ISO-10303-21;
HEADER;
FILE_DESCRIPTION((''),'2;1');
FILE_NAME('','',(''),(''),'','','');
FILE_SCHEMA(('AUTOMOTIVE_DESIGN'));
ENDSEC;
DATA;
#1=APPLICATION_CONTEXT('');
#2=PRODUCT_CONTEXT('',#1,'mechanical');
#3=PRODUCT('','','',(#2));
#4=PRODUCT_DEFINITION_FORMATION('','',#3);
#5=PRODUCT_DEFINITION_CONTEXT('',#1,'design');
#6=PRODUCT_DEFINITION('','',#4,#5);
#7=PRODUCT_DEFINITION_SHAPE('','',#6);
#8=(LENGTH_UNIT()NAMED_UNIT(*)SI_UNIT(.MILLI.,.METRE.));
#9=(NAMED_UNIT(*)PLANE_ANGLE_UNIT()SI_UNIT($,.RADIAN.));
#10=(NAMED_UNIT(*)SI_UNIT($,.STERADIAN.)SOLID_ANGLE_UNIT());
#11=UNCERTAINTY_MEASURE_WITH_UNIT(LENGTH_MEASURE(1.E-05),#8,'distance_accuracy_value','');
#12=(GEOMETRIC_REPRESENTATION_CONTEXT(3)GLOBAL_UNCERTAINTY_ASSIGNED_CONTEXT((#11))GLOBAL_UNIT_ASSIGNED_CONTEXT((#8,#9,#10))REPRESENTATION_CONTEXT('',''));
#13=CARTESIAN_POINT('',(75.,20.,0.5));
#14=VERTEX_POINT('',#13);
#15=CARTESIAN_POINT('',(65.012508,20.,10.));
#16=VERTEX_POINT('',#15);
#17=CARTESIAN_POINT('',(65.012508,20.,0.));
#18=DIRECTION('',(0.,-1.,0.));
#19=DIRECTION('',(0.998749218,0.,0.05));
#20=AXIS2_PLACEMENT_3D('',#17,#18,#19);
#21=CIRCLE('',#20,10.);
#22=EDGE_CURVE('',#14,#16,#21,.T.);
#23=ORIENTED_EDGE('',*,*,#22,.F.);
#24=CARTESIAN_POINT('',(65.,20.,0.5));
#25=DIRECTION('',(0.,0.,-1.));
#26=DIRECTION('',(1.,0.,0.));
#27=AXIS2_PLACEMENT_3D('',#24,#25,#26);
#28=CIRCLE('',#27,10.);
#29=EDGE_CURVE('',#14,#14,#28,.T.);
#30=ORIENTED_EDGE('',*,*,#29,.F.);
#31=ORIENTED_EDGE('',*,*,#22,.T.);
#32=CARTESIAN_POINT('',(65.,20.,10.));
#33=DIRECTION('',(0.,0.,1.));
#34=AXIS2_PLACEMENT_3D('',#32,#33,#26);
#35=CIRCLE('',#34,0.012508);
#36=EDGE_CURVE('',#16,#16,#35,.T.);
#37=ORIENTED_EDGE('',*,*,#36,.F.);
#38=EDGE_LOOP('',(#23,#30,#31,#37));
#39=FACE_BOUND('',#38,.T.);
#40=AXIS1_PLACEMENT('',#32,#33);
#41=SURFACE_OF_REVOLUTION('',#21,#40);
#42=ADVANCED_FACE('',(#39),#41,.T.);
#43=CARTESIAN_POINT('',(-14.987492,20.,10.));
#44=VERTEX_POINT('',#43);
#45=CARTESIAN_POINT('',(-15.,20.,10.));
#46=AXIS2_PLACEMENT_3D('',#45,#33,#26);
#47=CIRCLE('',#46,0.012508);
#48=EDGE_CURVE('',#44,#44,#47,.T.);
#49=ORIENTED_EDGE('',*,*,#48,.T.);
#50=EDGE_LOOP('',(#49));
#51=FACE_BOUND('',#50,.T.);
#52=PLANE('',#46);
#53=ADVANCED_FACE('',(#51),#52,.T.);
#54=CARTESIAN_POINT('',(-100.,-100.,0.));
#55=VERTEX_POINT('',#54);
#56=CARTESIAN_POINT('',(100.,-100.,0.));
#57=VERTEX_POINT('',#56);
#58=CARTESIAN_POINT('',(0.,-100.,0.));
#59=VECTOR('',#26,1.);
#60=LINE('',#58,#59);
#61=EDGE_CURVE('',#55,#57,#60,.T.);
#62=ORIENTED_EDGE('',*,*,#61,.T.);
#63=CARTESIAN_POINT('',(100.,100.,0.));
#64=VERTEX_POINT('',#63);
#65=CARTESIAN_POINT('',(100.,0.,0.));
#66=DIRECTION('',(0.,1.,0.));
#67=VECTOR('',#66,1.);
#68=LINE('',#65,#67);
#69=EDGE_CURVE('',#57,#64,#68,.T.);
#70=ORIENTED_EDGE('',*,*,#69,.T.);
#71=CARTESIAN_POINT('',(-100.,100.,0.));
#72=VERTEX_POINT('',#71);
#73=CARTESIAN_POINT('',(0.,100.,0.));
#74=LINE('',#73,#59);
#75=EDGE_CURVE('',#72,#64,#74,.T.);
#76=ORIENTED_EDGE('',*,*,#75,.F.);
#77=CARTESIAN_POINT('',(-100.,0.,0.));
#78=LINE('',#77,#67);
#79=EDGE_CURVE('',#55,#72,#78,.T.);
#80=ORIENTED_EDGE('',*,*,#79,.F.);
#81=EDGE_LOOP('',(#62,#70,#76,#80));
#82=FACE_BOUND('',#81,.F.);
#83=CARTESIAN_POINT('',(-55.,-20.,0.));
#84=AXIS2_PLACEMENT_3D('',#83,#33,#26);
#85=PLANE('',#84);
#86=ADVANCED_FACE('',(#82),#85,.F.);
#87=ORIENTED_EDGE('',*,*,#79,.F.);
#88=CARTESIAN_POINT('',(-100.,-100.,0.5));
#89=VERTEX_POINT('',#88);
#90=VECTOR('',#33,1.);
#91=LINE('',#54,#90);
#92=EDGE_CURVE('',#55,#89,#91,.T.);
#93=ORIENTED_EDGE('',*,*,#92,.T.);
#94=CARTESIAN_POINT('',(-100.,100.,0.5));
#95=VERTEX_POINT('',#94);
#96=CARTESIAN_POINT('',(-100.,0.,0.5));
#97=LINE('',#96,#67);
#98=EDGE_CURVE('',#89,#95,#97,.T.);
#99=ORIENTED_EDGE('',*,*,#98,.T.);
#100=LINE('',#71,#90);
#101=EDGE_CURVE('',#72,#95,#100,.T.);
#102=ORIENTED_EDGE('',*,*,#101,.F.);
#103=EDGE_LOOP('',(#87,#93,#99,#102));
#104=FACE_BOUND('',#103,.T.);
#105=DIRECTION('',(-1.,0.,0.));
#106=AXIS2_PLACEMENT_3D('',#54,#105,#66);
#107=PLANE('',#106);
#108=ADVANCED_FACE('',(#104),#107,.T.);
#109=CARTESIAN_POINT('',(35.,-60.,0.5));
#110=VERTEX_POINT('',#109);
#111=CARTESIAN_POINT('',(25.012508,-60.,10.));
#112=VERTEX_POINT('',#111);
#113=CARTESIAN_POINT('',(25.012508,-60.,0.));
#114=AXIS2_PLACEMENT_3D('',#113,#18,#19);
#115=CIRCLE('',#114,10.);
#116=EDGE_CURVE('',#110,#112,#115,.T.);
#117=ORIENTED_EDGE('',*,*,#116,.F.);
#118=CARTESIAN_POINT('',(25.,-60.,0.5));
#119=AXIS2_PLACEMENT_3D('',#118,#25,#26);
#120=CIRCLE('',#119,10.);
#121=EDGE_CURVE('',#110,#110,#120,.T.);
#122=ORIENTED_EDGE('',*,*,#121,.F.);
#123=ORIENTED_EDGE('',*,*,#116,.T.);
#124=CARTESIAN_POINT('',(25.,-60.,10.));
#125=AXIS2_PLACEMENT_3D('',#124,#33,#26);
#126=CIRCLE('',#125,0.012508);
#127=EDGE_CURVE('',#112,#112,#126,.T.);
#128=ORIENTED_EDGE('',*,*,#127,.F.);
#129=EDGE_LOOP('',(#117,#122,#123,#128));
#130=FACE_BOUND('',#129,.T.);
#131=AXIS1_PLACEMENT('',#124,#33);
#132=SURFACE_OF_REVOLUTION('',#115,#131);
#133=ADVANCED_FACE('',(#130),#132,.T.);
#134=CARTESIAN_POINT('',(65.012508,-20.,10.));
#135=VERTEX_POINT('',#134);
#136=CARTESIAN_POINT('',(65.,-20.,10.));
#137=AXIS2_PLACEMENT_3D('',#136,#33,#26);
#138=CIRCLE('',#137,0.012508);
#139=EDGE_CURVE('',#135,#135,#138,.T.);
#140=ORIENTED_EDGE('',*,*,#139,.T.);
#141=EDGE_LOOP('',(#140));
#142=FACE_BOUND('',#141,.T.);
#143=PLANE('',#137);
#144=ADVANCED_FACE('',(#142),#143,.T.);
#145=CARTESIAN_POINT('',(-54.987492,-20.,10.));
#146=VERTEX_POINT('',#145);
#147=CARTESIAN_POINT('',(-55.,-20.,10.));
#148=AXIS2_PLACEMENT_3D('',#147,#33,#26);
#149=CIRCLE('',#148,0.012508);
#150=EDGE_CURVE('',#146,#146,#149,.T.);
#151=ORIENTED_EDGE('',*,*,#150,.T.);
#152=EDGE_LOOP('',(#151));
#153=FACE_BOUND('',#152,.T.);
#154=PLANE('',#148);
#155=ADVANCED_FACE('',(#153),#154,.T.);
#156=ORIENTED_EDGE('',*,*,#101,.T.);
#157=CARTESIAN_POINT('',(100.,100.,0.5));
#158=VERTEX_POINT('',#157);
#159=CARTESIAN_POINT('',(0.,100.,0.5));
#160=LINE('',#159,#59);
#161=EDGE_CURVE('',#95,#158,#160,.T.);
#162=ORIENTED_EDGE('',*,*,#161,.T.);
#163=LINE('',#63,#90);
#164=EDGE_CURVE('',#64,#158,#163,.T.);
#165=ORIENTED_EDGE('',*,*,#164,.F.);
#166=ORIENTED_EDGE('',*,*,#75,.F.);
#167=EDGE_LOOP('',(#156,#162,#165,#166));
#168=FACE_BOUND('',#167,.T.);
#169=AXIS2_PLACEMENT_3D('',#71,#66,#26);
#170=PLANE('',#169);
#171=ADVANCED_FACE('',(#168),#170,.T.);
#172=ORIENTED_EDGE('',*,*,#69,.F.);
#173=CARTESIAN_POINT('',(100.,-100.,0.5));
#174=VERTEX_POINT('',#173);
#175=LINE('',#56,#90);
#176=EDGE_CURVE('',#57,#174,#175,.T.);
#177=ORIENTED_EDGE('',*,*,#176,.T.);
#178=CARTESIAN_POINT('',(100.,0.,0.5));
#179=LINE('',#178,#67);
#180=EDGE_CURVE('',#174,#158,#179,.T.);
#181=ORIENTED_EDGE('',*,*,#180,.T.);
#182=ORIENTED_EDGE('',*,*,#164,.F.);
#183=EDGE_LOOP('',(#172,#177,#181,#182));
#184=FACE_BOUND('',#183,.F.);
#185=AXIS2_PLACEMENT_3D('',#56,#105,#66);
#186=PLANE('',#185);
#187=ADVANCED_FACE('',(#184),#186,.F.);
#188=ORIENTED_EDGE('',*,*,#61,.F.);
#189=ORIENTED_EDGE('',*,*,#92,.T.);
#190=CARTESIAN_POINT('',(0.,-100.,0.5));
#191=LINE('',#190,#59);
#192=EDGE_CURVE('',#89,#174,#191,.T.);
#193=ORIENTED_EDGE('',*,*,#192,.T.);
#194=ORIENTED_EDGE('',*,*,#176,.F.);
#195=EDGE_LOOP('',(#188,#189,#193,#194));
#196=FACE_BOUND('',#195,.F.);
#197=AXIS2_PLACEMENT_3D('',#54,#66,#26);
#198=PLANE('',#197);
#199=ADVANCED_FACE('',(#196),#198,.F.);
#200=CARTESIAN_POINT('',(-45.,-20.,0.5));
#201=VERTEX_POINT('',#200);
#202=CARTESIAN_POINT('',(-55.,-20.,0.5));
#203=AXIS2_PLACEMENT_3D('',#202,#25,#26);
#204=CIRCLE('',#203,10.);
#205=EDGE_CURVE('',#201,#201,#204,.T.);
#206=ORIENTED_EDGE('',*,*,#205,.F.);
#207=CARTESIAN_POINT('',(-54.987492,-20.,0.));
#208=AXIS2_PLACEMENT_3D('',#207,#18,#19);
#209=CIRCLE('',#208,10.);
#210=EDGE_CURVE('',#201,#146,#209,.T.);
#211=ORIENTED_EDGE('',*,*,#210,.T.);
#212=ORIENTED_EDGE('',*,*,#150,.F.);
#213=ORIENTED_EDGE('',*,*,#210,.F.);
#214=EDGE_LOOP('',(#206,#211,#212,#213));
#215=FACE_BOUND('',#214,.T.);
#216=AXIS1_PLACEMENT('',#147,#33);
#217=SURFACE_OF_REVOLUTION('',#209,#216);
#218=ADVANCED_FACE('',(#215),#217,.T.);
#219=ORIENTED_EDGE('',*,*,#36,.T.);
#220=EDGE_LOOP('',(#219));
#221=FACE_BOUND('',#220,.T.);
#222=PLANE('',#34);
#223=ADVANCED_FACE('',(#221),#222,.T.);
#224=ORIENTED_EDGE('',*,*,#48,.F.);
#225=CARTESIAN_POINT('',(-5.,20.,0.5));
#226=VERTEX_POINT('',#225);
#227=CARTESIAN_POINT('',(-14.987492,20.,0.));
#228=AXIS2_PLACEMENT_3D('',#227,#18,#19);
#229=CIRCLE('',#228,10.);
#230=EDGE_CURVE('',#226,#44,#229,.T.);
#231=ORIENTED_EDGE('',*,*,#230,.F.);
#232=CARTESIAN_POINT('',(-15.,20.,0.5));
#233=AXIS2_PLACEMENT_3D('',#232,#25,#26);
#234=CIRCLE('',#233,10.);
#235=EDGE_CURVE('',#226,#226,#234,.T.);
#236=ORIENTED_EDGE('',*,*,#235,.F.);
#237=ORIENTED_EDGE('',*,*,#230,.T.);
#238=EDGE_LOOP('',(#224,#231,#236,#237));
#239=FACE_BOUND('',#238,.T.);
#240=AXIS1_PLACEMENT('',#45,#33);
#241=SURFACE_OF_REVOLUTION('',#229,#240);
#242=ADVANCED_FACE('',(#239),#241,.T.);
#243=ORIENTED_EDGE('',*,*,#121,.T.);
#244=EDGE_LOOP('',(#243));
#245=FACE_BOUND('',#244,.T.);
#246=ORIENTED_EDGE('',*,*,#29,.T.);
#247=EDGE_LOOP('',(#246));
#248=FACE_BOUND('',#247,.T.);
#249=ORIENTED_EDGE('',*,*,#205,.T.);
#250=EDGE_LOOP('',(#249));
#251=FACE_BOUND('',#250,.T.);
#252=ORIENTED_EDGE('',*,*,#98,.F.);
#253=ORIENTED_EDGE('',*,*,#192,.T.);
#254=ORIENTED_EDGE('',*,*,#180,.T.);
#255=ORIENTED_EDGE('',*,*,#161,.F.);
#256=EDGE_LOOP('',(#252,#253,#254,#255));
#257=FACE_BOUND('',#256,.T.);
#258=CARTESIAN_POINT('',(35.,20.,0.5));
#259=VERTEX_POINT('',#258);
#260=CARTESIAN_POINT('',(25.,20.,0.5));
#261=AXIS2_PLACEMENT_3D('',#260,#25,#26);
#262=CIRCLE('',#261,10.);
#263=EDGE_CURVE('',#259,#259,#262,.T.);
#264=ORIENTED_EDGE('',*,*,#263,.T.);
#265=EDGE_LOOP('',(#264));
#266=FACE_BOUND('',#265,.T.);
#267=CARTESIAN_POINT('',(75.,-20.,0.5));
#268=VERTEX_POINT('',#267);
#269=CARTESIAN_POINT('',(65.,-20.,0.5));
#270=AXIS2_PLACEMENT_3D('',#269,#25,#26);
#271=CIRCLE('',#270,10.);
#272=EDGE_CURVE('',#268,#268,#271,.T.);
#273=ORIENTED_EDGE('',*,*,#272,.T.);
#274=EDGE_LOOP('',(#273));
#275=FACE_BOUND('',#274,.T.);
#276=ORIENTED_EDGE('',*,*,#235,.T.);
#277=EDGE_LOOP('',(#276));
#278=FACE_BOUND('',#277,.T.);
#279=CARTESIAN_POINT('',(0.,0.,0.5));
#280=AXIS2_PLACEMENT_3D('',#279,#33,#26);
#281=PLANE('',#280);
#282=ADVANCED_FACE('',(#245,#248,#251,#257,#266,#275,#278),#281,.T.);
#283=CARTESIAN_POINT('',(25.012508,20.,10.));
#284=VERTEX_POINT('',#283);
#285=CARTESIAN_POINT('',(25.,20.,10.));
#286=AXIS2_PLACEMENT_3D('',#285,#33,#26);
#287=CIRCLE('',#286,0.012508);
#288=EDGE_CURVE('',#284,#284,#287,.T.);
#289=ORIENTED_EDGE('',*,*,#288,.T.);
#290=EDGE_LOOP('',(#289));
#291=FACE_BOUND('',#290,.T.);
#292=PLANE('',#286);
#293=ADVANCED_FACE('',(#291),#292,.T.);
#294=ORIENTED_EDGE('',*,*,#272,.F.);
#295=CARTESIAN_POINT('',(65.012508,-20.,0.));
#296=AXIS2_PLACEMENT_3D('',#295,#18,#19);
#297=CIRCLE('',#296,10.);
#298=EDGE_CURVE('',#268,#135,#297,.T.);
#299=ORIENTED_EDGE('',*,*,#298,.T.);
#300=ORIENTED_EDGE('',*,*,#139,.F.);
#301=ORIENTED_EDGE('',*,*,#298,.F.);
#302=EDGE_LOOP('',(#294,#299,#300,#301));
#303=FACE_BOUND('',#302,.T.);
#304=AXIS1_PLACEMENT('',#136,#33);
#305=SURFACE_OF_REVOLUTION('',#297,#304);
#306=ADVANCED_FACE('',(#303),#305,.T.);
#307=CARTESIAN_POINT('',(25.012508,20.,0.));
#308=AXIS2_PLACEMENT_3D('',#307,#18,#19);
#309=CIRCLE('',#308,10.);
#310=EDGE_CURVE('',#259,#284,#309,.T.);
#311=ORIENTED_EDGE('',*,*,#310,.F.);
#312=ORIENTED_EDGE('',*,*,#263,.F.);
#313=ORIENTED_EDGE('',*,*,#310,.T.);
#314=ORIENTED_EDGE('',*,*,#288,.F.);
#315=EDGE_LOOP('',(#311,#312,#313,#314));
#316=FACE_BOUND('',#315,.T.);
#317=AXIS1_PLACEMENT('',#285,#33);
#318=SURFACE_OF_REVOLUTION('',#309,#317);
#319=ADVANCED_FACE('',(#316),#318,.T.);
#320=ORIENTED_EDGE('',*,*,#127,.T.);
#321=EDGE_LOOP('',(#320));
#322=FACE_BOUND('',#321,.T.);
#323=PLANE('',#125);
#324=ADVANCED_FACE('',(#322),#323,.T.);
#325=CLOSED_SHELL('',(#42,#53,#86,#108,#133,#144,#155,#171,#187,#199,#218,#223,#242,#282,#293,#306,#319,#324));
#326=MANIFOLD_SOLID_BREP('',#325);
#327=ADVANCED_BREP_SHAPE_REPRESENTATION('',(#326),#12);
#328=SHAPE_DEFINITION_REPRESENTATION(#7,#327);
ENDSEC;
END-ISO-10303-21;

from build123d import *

# Parameters (mm, degrees)
F0_W     = 200
F0_H     = 200
F2_DEPTH = 0.5
F1_R     = 10
F3_DEPTH = 10


# Not quite as in the source:
# - a fillet or chamfer that OpenCascade refuses, or shapes differently, is made with other operations: its cross-section is extruded or revolved along the edge and cut away or added


with BuildPart() as f2:
    # F0 (on Top) → F2 (new body)
    with BuildSketch(Plane.XY):
        Rectangle(F0_W, F0_H)
    extrude(amount=F2_DEPTH)

    # F1 (on face) → F3 (join)
    with BuildSketch(Plane.XY):
        with Locations((-55, -20)):
            Circle(F1_R)
        with Locations((-15, 20)):
            Circle(F1_R)
        with Locations((25, -60)):
            Circle(F1_R)
        with Locations((25, 20)):
            Circle(F1_R)
        with Locations((65, -20)):
            Circle(F1_R)
        with Locations((65, 20)):
            Circle(F1_R)
    extrude(amount=F3_DEPTH)

    # F4: fillet of radius 10 on 6 edges, made by hand

    # F4_s1 → F4_t2 (revolve, cut)
    with BuildSketch(Plane.XZ.offset(20)):
        with BuildLine():
            ThreePointArc((-45, 0.5), (-48.0954678017, 7.2456883731), (-54.9874921777, 10))
            Line((-54.9874921777, 10), (-45, 10))
            Line((-45, 10), (-45, 0.5))
        make_face()
    revolve(axis=Axis((-55, -20, 10), (0, 0, 1)), mode=Mode.SUBTRACT)

    # F4_s3 → F4_t4 (revolve, cut)
    with BuildSketch(Plane.XZ.offset(-20)):
        with BuildLine():
            ThreePointArc((-5, 0.5), (-8.0954678017, 7.2456883731), (-14.9874921777, 10))
            Line((-14.9874921777, 10), (-5, 10))
            Line((-5, 10), (-5, 0.5))
        make_face()
    revolve(axis=Axis((-15, 20, 10), (0, 0, 1)), mode=Mode.SUBTRACT)

    # F4_s5 → F4_t6 (revolve, cut)
    with BuildSketch(Plane.XZ.offset(-20)):
        with BuildLine():
            ThreePointArc((35, 0.5), (31.9045321983, 7.2456883731), (25.0125078223, 10))
            Line((25.0125078223, 10), (35, 10))
            Line((35, 10), (35, 0.5))
        make_face()
    revolve(axis=Axis((25, 20, 10), (0, 0, 1)), mode=Mode.SUBTRACT)

    # F4_s7 → F4_t8 (revolve, cut)
    with BuildSketch(Plane.XZ.offset(-20)):
        with BuildLine():
            ThreePointArc((75, 0.5), (71.9045321983, 7.2456883731), (65.0125078223, 10))
            Line((65.0125078223, 10), (75, 10))
            Line((75, 10), (75, 0.5))
        make_face()
    revolve(axis=Axis((65, 20, 10), (0, 0, 1)), mode=Mode.SUBTRACT)

    # F4_s9 → F4_t10 (revolve, cut)
    with BuildSketch(Plane.XZ.offset(20)):
        with BuildLine():
            ThreePointArc((75, 0.5), (71.9045321983, 7.2456883731), (65.0125078223, 10))
            Line((65.0125078223, 10), (75, 10))
            Line((75, 10), (75, 0.5))
        make_face()
    revolve(axis=Axis((65, -20, 10), (0, 0, 1)), mode=Mode.SUBTRACT)

    # F4_s11 → F4_t12 (revolve, cut)
    with BuildSketch(Plane.XZ.offset(60)):
        with BuildLine():
            ThreePointArc((35, 0.5), (31.9045321983, 7.2456883731), (25.0125078223, 10))
            Line((25.0125078223, 10), (35, 10))
            Line((35, 10), (35, 0.5))
        make_face()
    revolve(axis=Axis((25, -60, 10), (0, 0, 1)), mode=Mode.SUBTRACT)


solid = f2.part
